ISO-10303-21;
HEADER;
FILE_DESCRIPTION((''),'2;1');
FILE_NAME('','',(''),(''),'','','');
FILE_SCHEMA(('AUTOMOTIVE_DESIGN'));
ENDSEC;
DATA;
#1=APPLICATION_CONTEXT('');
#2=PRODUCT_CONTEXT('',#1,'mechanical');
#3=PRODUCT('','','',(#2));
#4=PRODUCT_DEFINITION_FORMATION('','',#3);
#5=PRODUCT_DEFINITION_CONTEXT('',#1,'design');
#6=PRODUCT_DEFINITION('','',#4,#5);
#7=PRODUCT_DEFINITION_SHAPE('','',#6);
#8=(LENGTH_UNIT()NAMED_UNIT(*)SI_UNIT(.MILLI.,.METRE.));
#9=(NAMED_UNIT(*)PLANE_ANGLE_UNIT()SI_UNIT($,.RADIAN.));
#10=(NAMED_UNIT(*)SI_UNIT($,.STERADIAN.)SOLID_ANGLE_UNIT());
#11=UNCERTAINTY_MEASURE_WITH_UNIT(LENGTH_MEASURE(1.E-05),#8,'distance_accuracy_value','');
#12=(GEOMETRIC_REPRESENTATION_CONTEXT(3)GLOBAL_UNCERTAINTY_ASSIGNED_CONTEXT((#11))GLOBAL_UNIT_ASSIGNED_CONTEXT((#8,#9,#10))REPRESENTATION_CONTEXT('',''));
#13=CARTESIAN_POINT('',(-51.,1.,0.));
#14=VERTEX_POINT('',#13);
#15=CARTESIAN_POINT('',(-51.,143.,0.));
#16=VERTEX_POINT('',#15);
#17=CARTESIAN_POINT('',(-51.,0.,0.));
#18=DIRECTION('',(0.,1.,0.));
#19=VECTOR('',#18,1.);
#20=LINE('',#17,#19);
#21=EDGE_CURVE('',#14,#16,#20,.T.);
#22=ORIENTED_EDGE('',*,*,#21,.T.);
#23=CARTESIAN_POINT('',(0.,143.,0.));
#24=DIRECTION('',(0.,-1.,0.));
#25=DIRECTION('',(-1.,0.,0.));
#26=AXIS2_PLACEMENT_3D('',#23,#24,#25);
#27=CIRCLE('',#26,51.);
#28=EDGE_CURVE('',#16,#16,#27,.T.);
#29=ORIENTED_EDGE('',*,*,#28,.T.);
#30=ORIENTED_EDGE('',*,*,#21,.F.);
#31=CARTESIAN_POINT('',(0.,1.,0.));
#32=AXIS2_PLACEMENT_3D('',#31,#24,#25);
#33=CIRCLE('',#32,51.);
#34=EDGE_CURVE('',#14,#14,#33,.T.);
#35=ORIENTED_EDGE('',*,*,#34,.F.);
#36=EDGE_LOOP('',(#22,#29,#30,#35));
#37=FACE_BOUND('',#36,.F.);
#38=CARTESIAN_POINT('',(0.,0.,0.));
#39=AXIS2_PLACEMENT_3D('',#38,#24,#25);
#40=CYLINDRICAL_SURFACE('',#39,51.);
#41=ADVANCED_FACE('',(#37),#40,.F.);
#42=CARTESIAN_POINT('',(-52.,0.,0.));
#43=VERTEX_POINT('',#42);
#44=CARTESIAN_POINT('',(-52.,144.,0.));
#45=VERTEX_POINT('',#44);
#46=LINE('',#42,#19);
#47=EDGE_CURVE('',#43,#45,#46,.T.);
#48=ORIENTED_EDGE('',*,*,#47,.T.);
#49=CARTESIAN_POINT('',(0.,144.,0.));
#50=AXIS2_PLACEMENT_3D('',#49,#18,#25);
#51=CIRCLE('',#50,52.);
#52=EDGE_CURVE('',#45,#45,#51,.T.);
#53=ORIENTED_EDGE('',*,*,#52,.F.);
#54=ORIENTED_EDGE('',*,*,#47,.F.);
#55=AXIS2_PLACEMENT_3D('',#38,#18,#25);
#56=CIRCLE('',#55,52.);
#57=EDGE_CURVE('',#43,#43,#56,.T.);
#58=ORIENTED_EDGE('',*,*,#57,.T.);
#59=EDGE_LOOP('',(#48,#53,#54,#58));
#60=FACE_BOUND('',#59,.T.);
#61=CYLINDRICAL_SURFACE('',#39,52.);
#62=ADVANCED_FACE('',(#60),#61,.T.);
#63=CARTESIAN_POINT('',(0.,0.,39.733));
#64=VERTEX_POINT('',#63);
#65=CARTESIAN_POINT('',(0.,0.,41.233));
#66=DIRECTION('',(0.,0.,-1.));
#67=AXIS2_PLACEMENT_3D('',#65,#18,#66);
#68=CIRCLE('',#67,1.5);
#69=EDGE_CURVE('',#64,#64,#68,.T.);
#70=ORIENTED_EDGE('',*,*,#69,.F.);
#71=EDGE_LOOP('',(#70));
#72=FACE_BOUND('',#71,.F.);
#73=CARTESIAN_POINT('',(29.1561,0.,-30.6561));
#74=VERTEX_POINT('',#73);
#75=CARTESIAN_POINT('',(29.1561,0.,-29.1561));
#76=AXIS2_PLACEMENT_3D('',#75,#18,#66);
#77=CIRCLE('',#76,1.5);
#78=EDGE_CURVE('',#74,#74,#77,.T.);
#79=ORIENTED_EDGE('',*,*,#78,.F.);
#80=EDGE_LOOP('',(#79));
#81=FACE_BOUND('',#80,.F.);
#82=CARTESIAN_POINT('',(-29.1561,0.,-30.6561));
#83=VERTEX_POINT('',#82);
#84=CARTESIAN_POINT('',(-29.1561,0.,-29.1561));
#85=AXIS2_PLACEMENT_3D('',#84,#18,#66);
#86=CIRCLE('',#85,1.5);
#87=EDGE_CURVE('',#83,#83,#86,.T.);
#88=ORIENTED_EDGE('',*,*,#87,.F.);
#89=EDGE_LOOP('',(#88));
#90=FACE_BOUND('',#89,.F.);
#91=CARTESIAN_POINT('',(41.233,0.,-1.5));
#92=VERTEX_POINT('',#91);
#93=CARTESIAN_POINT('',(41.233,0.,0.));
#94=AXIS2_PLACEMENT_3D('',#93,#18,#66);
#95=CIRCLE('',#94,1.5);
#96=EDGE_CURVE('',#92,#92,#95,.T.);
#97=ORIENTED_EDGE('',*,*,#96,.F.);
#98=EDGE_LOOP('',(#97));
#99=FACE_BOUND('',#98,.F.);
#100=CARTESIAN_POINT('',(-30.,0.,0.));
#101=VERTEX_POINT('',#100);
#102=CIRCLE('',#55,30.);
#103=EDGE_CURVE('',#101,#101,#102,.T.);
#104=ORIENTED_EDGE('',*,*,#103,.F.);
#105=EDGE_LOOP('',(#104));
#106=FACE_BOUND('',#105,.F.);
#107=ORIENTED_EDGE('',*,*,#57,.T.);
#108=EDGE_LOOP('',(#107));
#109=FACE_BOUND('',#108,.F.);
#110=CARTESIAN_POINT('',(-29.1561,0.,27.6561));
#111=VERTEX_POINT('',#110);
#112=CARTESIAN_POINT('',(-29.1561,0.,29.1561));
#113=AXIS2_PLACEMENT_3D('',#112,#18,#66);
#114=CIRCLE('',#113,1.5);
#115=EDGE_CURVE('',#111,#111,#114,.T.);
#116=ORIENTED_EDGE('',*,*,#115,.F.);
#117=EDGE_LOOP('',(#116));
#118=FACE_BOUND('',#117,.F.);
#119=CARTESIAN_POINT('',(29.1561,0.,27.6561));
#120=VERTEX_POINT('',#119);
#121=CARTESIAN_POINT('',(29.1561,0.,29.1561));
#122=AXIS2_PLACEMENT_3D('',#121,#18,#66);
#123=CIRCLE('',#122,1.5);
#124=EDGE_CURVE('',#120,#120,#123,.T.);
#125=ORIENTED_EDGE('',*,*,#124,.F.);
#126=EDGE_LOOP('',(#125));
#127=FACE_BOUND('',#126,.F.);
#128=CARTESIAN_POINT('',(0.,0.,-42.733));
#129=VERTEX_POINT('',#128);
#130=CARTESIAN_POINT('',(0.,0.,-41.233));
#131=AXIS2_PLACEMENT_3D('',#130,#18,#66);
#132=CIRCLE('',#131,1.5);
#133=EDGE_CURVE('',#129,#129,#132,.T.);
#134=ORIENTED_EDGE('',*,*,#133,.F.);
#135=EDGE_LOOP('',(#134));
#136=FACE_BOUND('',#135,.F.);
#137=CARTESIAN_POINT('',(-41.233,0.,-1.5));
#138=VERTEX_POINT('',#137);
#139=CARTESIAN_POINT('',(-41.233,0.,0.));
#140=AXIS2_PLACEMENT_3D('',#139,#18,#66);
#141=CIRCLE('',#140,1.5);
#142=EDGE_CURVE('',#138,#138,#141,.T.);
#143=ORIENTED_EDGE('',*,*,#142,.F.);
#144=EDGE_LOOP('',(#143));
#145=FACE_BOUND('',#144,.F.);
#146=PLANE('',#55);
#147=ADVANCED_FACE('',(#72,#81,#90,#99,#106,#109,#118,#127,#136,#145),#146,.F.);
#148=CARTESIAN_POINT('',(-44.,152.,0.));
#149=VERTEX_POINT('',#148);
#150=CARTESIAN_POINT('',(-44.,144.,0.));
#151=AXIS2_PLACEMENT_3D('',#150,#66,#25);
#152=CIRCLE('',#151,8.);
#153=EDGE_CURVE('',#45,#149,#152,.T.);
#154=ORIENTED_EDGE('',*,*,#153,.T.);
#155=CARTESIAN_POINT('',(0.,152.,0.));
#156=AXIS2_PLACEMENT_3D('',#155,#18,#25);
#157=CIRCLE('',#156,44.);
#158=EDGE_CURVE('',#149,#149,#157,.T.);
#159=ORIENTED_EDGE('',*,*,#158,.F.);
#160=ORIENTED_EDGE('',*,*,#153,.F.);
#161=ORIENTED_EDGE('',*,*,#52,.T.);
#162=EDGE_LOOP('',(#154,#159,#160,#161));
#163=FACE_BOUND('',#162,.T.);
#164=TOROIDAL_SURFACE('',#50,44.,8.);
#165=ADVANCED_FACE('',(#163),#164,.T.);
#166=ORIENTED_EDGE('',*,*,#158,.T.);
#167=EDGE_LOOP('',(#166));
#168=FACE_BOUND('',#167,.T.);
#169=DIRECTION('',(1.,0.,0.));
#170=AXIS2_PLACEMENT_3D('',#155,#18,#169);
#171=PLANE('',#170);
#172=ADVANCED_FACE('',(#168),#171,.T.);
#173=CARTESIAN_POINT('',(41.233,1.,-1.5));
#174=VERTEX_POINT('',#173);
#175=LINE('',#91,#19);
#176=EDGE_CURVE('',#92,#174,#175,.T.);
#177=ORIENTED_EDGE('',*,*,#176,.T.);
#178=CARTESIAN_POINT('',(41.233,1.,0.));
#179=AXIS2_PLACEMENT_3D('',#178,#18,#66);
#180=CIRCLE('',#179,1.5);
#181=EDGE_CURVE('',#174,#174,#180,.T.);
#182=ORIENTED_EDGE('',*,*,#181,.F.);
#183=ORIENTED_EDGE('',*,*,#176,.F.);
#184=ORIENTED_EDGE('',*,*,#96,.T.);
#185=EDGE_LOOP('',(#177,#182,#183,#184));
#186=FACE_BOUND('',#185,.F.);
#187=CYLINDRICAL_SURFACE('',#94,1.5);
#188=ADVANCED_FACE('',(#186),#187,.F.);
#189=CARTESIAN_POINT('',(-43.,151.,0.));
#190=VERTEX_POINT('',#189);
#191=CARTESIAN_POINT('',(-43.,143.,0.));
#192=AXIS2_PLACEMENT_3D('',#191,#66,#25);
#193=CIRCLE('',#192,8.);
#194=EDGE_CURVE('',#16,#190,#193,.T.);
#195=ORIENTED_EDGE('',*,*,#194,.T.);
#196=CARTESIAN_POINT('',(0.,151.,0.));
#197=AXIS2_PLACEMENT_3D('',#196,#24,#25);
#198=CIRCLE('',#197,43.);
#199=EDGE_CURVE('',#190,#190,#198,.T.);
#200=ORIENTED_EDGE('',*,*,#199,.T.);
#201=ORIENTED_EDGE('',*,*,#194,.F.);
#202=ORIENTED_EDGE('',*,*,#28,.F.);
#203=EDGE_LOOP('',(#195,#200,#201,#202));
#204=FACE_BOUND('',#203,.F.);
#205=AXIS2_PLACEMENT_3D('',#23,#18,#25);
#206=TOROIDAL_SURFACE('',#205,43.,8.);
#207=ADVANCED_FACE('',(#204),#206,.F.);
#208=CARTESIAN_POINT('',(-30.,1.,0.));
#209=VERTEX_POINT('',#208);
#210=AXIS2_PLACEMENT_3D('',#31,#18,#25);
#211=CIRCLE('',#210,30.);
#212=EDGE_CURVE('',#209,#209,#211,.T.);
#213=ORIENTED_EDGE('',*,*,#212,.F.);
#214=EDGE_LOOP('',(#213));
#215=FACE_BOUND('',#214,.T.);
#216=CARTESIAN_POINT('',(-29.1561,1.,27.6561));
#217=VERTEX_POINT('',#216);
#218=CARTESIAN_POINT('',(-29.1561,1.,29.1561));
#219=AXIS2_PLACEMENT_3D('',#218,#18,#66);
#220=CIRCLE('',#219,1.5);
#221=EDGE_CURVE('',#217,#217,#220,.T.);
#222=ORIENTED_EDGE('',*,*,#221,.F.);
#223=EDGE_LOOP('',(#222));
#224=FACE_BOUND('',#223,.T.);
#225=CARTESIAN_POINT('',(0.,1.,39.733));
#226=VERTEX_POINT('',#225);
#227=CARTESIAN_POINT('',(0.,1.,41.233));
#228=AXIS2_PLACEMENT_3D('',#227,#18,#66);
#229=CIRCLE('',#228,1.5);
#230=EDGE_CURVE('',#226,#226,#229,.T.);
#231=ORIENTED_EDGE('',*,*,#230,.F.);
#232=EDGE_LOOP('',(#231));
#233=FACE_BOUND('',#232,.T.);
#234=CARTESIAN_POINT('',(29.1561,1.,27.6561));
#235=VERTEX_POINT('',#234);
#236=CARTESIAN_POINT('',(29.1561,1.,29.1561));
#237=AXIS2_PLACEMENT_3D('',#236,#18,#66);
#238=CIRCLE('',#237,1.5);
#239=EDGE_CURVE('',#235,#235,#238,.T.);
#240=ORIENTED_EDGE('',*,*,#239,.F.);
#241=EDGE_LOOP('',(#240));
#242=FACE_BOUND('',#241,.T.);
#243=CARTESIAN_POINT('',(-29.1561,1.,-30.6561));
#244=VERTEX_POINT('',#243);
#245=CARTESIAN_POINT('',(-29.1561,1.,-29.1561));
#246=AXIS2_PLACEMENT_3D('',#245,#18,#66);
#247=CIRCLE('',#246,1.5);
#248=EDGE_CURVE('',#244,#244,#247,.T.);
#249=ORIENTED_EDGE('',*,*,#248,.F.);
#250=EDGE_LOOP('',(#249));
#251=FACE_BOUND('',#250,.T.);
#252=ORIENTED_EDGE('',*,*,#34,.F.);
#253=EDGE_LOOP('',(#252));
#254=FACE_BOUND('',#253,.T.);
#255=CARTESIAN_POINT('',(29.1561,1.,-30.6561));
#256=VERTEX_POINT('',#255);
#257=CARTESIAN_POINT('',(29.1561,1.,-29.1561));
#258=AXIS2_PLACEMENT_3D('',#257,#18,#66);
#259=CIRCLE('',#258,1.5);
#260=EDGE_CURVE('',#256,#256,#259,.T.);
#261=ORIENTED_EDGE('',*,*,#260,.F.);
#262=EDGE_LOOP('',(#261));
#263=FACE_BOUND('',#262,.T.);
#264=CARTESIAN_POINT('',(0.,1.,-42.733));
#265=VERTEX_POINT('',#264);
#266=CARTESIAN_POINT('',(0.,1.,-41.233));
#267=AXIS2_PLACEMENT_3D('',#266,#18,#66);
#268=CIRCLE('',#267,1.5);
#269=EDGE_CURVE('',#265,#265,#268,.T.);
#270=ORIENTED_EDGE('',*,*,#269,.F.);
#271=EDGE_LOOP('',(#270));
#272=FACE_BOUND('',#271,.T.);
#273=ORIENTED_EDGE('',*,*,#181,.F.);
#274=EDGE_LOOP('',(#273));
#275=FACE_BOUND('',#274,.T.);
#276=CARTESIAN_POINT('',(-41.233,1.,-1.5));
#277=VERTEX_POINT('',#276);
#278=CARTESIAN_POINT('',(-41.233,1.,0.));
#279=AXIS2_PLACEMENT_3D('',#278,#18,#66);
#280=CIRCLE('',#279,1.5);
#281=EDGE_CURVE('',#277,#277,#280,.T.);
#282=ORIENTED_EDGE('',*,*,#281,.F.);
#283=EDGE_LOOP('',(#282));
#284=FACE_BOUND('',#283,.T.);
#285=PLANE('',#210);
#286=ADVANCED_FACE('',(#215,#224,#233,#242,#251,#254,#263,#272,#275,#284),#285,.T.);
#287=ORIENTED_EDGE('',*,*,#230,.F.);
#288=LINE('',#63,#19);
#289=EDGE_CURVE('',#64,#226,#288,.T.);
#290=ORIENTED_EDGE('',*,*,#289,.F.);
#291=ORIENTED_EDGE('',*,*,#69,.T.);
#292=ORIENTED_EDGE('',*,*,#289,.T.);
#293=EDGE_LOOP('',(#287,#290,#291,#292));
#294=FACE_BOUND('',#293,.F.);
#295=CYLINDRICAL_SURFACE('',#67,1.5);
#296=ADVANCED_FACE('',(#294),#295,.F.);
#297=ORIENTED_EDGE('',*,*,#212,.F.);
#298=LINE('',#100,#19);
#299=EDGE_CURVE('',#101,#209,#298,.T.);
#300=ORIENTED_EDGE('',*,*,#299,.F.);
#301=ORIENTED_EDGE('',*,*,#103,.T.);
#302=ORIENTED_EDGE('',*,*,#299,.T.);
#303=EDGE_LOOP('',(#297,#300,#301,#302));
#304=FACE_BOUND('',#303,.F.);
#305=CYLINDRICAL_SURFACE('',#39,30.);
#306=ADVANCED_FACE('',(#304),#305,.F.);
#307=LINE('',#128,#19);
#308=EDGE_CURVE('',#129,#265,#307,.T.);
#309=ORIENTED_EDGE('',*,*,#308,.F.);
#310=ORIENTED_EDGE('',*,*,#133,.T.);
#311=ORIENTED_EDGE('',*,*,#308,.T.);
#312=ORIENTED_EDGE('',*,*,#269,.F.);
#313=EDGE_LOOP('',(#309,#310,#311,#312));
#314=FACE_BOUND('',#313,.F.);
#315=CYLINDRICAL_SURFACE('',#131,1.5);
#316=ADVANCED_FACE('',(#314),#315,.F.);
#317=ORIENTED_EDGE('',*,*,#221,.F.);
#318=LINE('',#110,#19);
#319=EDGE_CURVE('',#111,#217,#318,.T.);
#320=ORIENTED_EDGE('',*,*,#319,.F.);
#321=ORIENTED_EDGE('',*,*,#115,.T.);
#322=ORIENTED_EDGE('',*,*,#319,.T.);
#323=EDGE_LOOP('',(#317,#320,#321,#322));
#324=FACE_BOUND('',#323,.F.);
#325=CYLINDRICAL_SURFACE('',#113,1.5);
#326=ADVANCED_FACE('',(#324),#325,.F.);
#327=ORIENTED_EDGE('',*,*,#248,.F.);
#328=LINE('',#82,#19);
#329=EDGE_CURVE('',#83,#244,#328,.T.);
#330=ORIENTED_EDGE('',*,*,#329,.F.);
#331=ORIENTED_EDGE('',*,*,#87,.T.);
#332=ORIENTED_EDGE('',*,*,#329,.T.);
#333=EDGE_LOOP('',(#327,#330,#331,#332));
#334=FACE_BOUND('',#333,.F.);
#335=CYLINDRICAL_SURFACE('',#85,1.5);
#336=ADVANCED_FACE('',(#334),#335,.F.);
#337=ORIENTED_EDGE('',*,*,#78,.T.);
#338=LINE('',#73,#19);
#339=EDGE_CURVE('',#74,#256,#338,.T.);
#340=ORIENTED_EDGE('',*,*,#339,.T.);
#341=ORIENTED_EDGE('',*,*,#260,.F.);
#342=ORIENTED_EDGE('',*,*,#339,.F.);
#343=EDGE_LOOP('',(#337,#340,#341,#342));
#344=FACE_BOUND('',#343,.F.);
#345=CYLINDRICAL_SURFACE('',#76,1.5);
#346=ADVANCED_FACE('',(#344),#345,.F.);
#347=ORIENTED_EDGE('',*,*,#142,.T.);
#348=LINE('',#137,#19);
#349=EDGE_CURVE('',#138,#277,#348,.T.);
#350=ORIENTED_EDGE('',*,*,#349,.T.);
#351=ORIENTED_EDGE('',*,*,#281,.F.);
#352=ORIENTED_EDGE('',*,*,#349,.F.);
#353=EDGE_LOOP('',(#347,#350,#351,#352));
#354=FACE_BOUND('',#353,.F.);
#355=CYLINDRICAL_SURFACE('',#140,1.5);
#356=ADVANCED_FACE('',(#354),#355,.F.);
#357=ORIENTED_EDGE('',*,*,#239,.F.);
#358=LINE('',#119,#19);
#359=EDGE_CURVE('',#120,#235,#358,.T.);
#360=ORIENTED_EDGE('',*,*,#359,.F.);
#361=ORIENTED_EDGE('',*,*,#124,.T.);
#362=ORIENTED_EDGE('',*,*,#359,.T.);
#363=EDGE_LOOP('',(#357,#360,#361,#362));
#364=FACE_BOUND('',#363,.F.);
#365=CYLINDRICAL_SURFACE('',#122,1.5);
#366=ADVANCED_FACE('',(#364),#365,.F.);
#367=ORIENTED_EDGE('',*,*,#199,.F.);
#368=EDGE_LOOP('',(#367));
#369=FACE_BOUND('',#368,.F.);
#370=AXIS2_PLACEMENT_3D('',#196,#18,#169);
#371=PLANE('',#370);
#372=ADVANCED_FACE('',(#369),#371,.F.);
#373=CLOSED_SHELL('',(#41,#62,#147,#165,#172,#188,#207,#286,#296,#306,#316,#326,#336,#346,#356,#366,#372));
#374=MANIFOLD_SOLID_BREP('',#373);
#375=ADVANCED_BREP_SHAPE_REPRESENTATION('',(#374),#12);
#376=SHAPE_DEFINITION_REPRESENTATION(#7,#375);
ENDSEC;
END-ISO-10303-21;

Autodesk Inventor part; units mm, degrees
ref_plane "YZ Plane" through (0, 0, 0) normal (1, 0, 0) x (0, 1, 0)
ref_plane "XZ Plane" through (0, 0, 0) normal (0, 1, 0) x (-1, 0, 0)
ref_plane "XY Plane" through (0, 0, 0) normal (0, 0, 1) x (1, 0, 0)
sketch "Boceto1" plane through (0, 0, 0) normal (0, 1, 0) x (-1, 0, 0)
  circle A0 centre (0, 0) radius 51
  circle A1 centre (0, 0) radius 30
  circle A2 centre (0, 0) radius 52
  point P0 (41.233, 0)
  point P1 (29.1561, 29.1561)
  point P2 (0, 41.233)
  point P3 (-29.1561, 29.1561)
  point P4 (-41.233, 0)
  point P5 (-29.1561, -29.1561)
  point P6 (0, -41.233)
  point P7 (29.1561, -29.1561)
  dimension "d0" = 102
  dimension "d1" = 60
  dimension "d2" = 41.233
  dimension "d3" = 1
  dimension "d8" = 360
extrude "Extrusión1" add sketch "Boceto1" along normal blind 1 contours A0
extrude "Extrusión2" add sketch "Boceto1" along normal blind 152 contours A0 | A2
sketch "Boceto3" plane through (0, 152, 0) normal (0, 1, 0) x (1, 0, 0)
  circle A0 centre (0, 0) radius 30 projected
extrude "Extrusión4" add sketch "Boceto3" against normal blind 151
shell "Vaciado1" thickness 1 removed faces 1 at (-8.8546, 1, 4.6472)
fillet "Empalme1" radius 8 2 edges at (51, 151, 0) (52, 152, 0)
hole "Hole1" at (-41.233, 0, 0) at (-29.1561, 0, 29.1561) at (0, 0, 41.233) at (29.1561, 0, 29.1561) at (41.233, 0, 0) at (29.1561, 0, -29.1561) at (0, 0, -41.233) at (-29.1561, 0, -29.1561) direction (0, 1, 0) diameter 3 depth 8 tip angle 118
properties part number "Capa" material "Caucho, Silicona"
